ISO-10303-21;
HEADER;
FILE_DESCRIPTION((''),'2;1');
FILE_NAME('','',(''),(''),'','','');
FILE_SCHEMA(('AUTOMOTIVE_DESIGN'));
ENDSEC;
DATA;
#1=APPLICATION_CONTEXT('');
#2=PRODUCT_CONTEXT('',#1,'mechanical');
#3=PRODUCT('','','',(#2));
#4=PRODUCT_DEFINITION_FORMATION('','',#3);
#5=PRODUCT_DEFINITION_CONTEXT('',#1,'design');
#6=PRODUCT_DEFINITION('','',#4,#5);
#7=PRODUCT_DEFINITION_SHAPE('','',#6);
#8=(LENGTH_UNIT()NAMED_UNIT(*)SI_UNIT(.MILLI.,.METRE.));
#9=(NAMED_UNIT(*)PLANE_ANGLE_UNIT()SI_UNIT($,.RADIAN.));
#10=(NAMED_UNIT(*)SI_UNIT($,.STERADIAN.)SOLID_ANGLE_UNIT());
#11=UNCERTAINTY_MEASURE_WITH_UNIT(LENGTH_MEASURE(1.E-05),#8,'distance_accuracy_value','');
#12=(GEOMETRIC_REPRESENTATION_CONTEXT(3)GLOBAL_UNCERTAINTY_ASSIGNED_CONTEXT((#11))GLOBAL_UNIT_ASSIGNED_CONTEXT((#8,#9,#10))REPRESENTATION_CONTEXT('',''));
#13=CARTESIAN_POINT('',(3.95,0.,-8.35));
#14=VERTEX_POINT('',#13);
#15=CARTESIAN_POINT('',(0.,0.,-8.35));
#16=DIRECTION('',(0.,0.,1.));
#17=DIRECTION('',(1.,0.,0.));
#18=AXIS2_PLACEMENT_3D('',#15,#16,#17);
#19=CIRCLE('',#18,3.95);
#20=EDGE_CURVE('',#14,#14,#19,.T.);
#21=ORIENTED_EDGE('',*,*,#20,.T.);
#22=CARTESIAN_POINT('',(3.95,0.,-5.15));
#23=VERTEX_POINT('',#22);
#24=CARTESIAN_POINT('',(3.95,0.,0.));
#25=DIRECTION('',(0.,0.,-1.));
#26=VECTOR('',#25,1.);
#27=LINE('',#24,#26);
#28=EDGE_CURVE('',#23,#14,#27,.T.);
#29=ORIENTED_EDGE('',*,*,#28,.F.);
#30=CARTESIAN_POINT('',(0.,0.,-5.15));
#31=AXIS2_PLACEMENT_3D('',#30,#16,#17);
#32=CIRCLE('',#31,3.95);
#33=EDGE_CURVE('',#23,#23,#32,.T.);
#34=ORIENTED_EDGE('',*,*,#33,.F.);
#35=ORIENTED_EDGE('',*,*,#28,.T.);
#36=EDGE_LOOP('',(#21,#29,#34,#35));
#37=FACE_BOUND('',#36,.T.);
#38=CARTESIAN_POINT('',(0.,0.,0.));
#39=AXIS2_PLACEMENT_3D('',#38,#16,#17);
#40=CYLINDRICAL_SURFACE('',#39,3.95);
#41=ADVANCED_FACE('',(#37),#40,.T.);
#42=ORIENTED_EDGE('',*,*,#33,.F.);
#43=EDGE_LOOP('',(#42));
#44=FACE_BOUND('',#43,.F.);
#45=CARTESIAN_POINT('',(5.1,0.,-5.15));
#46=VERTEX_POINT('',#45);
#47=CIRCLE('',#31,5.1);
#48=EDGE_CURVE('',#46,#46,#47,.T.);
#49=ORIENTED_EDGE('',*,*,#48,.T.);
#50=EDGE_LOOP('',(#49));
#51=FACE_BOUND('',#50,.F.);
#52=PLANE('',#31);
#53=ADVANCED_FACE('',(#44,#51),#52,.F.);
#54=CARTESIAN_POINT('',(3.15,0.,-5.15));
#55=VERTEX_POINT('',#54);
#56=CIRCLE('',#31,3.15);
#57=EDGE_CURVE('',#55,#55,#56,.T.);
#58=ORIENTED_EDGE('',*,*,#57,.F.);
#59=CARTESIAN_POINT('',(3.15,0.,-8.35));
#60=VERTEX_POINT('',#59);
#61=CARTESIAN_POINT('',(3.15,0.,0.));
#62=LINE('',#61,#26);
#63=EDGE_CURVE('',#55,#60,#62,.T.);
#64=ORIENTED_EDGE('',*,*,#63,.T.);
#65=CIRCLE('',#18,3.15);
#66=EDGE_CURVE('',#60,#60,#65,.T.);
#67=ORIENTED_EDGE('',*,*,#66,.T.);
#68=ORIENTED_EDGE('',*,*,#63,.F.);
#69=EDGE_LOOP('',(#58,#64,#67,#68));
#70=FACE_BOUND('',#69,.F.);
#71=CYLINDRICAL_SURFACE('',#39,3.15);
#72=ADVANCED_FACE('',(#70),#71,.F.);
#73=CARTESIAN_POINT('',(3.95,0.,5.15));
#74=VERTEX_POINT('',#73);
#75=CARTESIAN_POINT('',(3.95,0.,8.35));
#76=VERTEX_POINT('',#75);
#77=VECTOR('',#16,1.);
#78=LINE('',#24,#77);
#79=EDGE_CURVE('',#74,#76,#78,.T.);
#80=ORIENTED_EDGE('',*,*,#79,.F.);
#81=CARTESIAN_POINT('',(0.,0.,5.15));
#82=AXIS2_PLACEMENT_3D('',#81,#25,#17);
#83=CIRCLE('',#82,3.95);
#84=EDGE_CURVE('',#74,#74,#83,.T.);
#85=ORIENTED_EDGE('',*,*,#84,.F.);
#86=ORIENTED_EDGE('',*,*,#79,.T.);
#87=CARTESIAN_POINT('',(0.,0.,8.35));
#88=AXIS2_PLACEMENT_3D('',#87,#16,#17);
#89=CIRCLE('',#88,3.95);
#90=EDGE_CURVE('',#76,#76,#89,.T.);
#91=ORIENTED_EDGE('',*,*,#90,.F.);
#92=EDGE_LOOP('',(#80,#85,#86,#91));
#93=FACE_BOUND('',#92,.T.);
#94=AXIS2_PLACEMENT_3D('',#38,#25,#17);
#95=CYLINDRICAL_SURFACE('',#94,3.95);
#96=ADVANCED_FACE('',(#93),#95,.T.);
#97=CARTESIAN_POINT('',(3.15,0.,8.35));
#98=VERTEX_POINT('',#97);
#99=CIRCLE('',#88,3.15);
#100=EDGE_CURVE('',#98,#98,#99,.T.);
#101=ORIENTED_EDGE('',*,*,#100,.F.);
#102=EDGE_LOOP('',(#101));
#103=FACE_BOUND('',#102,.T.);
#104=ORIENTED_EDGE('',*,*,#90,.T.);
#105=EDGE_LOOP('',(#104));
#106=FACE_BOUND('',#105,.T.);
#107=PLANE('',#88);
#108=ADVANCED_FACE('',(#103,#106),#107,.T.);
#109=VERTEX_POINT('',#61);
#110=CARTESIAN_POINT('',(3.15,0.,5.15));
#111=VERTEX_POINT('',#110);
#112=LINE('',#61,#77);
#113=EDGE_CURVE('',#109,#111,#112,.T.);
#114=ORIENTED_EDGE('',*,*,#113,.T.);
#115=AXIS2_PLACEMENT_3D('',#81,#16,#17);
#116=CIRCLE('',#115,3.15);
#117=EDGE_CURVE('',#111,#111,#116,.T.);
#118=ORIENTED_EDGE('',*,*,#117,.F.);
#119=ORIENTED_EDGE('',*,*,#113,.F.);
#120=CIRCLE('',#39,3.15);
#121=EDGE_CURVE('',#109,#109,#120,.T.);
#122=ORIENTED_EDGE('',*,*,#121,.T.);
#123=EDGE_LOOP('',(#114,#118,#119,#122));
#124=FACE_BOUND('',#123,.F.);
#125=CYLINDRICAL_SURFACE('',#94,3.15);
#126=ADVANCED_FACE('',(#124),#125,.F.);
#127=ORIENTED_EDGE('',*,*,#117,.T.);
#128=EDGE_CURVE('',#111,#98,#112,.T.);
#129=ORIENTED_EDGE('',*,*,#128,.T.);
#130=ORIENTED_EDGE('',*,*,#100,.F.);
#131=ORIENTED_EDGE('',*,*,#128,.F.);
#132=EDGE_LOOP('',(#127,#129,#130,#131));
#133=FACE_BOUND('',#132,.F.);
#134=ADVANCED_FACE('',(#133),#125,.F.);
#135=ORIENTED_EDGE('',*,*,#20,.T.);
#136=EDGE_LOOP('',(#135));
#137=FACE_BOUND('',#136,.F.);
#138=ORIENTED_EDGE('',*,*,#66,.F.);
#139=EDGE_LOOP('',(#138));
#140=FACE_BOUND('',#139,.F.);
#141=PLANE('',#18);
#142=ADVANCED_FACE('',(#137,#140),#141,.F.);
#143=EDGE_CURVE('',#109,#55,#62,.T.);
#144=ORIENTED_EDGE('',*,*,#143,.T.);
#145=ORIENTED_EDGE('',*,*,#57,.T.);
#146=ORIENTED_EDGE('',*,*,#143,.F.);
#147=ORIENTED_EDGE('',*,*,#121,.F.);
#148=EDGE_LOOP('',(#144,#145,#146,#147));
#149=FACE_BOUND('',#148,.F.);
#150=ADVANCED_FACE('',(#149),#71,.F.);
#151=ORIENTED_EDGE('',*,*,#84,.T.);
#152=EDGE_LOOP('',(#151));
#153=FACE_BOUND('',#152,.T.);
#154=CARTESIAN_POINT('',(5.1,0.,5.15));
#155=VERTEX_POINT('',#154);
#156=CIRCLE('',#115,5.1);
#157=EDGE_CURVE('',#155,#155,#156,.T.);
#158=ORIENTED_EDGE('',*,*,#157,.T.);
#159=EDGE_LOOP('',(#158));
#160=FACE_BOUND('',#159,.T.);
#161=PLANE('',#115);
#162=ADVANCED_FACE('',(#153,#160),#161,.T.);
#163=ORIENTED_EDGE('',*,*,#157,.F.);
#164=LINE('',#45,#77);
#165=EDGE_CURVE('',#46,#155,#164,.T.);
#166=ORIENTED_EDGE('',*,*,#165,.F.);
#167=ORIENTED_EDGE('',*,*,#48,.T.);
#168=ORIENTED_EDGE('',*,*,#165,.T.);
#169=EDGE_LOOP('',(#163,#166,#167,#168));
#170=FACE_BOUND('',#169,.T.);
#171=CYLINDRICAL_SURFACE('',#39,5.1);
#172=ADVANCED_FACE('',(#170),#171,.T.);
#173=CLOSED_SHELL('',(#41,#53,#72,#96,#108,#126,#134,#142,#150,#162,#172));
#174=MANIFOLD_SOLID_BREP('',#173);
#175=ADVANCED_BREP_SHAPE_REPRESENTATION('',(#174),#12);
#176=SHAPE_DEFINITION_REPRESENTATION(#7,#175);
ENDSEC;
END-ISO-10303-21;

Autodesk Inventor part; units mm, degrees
ref_plane "YZ Plane" through (0, 0, 0) normal (1, 0, 0) x (0, 1, 0)
ref_plane "XZ Plane" through (0, 0, 0) normal (0, 1, 0) x (-1, 0, 0)
ref_plane "XY Plane" through (0, 0, 0) normal (0, 0, 1) x (1, 0, 0)
sketch "Sketch1" plane through (0, 0, 0) normal (0, 0, 1) x (1, 0, 0)
  circle A0 centre (0, 0) radius 5.1
  circle A1 centre (0, 0) radius 3.95
  circle A2 centre (0, 0) radius 3.15
  dimension "d0" = 10.2
  dimension "d1" = 7.9
  dimension "d4" = 6.3
extrude "Extrusion1" add sketch "Sketch1" along normal mid plane 10.3 contours A0 | A1
extrude "Extrusion2" add sketch "Sketch1" along normal mid plane 16.7 contours A1
properties part number "spacer" material "Stainless Steel"
